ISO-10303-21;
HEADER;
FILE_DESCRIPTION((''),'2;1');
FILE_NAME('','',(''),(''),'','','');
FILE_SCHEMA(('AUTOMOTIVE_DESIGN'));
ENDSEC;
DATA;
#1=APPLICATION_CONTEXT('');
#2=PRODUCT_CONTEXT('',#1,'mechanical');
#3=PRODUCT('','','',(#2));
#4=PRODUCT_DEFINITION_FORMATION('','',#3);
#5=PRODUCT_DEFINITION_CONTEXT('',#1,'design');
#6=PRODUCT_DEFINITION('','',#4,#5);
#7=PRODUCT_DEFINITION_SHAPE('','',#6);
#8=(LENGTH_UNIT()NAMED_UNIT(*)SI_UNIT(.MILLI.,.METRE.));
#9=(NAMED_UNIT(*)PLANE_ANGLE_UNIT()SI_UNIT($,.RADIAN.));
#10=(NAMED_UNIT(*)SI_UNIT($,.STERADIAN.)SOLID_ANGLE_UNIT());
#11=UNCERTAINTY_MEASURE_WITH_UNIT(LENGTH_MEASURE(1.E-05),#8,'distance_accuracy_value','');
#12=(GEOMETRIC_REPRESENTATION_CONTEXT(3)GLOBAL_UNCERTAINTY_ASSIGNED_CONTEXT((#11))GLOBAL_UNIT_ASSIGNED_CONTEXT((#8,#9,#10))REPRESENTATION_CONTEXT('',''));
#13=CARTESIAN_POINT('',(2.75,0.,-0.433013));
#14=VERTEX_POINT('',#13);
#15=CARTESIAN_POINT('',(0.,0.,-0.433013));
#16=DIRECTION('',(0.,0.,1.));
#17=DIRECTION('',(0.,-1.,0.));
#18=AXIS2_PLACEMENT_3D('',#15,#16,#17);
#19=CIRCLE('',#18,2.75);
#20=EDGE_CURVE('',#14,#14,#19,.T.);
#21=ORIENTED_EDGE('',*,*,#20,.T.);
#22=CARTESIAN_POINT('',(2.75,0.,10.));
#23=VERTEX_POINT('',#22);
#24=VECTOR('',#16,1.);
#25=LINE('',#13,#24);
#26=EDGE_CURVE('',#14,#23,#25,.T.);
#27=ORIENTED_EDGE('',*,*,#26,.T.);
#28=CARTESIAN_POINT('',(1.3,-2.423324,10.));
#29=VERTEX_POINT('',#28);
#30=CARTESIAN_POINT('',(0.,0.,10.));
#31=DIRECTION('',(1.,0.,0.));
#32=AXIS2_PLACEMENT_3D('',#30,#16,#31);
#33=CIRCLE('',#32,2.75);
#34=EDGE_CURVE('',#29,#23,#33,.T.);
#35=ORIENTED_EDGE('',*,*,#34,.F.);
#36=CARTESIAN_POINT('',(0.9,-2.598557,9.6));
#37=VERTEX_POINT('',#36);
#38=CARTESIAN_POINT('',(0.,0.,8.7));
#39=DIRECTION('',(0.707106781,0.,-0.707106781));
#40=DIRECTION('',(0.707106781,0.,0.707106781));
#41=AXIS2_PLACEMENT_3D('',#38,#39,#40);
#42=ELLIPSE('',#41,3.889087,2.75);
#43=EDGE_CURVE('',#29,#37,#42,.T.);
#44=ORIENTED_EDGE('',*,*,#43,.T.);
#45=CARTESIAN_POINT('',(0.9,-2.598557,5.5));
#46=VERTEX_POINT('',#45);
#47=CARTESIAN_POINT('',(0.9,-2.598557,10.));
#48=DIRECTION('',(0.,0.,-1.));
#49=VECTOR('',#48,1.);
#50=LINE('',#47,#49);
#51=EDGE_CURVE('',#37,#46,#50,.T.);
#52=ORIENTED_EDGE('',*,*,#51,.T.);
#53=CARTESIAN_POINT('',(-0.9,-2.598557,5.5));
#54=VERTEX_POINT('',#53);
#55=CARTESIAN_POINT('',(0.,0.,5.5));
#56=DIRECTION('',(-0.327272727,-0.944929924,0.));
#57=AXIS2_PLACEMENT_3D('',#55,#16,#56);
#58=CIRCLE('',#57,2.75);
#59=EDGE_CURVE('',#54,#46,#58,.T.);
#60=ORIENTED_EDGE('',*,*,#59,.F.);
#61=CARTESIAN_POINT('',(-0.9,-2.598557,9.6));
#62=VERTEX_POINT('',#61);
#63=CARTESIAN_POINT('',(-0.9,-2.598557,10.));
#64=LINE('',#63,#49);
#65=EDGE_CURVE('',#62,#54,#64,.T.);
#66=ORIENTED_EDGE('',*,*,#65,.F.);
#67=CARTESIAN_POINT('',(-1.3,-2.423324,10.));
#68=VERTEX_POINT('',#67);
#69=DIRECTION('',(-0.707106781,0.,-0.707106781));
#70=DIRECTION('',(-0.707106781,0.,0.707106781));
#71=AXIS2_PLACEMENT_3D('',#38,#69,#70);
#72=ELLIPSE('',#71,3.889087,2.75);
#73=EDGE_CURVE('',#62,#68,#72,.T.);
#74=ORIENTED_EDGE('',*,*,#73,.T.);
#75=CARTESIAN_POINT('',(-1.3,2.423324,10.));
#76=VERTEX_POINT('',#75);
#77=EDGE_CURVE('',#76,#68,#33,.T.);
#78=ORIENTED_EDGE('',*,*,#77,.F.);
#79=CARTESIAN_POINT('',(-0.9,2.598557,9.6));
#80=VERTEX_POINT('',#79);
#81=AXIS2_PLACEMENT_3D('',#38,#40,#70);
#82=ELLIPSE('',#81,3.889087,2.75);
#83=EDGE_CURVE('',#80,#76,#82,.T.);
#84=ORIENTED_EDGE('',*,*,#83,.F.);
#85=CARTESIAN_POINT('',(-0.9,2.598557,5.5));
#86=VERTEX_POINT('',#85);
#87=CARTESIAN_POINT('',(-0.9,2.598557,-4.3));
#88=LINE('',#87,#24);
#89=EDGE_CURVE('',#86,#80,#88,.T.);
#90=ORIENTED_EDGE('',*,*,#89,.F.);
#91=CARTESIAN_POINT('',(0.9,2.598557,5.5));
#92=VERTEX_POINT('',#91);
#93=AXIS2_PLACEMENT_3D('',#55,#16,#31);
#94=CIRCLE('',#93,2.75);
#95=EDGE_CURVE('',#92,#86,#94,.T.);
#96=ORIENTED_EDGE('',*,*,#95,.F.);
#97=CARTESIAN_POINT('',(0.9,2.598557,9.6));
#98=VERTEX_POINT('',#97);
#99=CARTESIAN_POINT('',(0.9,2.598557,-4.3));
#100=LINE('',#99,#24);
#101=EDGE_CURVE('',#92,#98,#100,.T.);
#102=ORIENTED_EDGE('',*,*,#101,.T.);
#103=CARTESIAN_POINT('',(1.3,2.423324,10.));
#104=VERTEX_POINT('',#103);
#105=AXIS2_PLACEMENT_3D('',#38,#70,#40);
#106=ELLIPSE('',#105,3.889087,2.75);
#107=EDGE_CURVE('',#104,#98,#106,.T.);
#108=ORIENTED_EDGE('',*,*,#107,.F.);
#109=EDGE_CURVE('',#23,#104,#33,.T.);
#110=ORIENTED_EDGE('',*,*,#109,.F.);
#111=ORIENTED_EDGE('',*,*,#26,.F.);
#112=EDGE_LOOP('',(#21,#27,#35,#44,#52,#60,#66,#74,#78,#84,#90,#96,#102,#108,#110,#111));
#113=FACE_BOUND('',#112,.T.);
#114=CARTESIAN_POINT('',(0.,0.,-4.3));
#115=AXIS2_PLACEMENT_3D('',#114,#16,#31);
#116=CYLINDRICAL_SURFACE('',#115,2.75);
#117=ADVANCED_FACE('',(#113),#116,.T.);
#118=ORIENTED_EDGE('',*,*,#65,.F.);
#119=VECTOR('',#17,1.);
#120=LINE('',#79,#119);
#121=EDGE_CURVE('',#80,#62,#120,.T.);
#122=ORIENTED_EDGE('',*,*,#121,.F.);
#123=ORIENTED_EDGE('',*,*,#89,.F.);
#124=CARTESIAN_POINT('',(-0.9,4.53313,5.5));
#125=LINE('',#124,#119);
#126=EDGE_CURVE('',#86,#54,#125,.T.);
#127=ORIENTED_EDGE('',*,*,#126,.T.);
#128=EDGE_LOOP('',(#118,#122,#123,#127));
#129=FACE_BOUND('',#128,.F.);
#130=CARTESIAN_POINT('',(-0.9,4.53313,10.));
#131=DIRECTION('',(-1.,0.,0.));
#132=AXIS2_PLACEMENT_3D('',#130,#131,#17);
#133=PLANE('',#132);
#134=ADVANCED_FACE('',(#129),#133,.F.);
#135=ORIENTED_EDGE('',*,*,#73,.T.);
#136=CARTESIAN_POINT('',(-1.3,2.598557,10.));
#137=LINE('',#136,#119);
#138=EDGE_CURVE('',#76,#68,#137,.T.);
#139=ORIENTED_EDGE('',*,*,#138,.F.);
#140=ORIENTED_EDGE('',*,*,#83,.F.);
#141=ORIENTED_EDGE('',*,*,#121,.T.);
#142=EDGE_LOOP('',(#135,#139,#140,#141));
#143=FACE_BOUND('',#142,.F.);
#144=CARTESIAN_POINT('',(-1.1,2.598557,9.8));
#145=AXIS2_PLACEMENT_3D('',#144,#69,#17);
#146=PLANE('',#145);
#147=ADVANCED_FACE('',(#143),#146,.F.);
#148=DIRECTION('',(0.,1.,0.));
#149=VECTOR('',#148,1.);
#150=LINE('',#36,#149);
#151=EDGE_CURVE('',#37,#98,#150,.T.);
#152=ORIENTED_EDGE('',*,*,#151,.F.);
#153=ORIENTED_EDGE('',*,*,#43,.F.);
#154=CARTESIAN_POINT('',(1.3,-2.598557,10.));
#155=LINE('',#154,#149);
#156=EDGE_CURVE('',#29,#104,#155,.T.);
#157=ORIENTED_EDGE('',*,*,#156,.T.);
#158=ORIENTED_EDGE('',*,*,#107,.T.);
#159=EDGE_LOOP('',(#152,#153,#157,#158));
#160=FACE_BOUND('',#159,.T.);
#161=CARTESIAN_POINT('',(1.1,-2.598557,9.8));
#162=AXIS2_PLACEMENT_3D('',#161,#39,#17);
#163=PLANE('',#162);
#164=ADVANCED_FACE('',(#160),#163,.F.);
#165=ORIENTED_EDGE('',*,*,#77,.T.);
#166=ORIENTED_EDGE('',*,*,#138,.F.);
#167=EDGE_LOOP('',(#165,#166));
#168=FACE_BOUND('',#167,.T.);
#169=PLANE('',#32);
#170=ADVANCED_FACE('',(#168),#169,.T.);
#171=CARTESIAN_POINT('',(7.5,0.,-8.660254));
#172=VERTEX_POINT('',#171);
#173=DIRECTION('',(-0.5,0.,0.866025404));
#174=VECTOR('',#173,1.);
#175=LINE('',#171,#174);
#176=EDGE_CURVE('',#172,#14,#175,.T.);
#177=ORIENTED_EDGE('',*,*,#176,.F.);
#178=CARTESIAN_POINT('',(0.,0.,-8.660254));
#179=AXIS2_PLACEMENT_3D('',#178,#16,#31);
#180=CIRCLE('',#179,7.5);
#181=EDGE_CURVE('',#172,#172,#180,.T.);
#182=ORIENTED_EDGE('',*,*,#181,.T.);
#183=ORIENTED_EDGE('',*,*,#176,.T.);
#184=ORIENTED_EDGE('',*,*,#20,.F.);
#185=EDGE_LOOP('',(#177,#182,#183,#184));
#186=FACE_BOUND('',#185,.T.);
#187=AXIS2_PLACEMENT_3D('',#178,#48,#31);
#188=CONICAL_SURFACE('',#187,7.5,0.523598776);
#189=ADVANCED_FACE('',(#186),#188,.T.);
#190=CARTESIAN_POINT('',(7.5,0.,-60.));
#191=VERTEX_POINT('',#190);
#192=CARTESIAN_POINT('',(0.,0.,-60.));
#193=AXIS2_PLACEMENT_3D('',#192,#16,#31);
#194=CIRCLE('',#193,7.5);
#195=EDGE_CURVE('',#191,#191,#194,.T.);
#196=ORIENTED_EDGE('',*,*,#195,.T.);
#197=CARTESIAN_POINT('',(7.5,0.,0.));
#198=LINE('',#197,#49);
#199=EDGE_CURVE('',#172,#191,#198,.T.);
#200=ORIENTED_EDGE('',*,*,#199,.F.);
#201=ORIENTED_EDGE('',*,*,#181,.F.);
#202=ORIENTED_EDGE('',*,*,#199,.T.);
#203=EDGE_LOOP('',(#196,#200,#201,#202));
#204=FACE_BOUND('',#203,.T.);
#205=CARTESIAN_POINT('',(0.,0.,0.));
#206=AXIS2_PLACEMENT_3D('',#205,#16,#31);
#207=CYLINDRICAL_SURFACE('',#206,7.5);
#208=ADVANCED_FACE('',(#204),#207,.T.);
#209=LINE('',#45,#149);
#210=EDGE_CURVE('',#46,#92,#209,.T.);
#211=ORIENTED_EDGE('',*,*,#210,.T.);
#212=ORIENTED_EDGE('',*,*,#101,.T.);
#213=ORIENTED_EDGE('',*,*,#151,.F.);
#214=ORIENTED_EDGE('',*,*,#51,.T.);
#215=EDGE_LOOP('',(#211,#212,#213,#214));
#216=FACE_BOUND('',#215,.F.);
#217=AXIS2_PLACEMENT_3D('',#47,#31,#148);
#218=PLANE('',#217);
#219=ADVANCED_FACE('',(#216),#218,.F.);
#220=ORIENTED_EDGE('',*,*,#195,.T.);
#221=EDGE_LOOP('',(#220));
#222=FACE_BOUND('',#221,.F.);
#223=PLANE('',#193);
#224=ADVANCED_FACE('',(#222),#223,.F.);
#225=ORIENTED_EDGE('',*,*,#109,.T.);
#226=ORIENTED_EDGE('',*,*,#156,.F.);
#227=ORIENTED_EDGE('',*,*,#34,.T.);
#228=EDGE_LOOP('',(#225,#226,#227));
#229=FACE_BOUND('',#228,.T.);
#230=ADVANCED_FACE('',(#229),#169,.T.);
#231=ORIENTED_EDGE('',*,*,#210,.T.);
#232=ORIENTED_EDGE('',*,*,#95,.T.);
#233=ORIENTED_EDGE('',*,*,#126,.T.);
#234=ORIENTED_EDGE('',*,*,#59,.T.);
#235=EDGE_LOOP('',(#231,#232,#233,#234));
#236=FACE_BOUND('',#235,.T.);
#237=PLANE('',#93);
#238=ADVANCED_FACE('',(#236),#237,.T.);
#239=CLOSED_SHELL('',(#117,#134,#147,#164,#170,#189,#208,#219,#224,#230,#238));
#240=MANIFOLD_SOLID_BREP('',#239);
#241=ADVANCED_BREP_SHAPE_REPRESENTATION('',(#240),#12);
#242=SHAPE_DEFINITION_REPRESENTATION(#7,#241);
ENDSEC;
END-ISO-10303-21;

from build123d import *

# Parameters (mm, degrees)
F0_R        = 7.5
F0_R_2      = 2.75
F1_DEPTH    = 60
F2_DEPTH    = 10
F3_S5_R     = 2.75
F3_T6_DEPTH = 13
F5_DEPTH    = 4.5
F6_SIZE     = 0.4


# Not quite as in the source:
# - a fillet or chamfer that OpenCascade refuses, or shapes differently, is made with other operations: its cross-section is extruded or revolved along the edge and cut away or added


with BuildPart() as f1:
    # F0 (on Top) → F1 (new body)
    with BuildSketch(Plane.XY):
        Circle(F0_R)
        Circle(F0_R_2, mode=Mode.SUBTRACT)
        Circle(F0_R_2)
    extrude(amount=-F1_DEPTH)

    # F0 (on Top) → F2 (join)
    with BuildSketch(Plane.XY):
        Circle(F0_R_2)
    extrude(amount=F2_DEPTH)

    # F3: chamfer of 5 x 8.6602540378 on 1 edges, made by hand


with BuildPart() as f3_tool2:
    # F3_s3 → F3_t4 (revolve)
    with BuildSketch(Plane.XZ):
        Polygon((7.5, -8.6602540378), (2.5, 0), (7.5, 0), align=None)
    revolve(axis=Axis((0, 0, 0), (0, 0, 1)))

    # F3_s5 → F3_t6 (cut, symmetric)
    with BuildSketch(Plane.XY.offset(-4.3)):
        Circle(F3_S5_R)
    extrude(amount=F3_T6_DEPTH, both=True, mode=Mode.SUBTRACT)


with BuildPart() as f1_1:
    add(f1.part)

    # F3_t1: cut F3_tool2
    add(f3_tool2.part, mode=Mode.SUBTRACT)

    # F4 (on face) → F5 (cut)
    with BuildSketch(Plane.XY.offset(10)):
        with BuildLine():
            ThreePointArc((-0.9, -2.598557292), (0, -2.75), (0.9, -2.598557292))
            Line((0.9, -2.598557292), (0.9, 2.598557292))
            ThreePointArc((0.9, 2.598557292), (0, 2.75), (-0.9, 2.598557292))
            Line((-0.9, 2.598557292), (-0.9, -2.598557292))
        make_face()
        with BuildLine():
            ThreePointArc((-0.9, 2.598557292), (0, 2.75), (0.9, 2.598557292))
            Line((0.9, 2.598557292), (0.9, 4.5331302099))
            Line((0.9, 4.5331302099), (-0.9, 4.5331302099))
            Line((-0.9, 4.5331302099), (-0.9, 2.598557292))
        make_face()
    extrude(amount=-F5_DEPTH, mode=Mode.SUBTRACT)

    # F6
    f6_edges = [f1_1.edges().sort_by_distance(p)[0] for p in [
        (-0.9, 0, 10),
        (0.9, 0, 10),
    ]]
    chamfer(f6_edges, length=F6_SIZE)


solid = f1_1.part
